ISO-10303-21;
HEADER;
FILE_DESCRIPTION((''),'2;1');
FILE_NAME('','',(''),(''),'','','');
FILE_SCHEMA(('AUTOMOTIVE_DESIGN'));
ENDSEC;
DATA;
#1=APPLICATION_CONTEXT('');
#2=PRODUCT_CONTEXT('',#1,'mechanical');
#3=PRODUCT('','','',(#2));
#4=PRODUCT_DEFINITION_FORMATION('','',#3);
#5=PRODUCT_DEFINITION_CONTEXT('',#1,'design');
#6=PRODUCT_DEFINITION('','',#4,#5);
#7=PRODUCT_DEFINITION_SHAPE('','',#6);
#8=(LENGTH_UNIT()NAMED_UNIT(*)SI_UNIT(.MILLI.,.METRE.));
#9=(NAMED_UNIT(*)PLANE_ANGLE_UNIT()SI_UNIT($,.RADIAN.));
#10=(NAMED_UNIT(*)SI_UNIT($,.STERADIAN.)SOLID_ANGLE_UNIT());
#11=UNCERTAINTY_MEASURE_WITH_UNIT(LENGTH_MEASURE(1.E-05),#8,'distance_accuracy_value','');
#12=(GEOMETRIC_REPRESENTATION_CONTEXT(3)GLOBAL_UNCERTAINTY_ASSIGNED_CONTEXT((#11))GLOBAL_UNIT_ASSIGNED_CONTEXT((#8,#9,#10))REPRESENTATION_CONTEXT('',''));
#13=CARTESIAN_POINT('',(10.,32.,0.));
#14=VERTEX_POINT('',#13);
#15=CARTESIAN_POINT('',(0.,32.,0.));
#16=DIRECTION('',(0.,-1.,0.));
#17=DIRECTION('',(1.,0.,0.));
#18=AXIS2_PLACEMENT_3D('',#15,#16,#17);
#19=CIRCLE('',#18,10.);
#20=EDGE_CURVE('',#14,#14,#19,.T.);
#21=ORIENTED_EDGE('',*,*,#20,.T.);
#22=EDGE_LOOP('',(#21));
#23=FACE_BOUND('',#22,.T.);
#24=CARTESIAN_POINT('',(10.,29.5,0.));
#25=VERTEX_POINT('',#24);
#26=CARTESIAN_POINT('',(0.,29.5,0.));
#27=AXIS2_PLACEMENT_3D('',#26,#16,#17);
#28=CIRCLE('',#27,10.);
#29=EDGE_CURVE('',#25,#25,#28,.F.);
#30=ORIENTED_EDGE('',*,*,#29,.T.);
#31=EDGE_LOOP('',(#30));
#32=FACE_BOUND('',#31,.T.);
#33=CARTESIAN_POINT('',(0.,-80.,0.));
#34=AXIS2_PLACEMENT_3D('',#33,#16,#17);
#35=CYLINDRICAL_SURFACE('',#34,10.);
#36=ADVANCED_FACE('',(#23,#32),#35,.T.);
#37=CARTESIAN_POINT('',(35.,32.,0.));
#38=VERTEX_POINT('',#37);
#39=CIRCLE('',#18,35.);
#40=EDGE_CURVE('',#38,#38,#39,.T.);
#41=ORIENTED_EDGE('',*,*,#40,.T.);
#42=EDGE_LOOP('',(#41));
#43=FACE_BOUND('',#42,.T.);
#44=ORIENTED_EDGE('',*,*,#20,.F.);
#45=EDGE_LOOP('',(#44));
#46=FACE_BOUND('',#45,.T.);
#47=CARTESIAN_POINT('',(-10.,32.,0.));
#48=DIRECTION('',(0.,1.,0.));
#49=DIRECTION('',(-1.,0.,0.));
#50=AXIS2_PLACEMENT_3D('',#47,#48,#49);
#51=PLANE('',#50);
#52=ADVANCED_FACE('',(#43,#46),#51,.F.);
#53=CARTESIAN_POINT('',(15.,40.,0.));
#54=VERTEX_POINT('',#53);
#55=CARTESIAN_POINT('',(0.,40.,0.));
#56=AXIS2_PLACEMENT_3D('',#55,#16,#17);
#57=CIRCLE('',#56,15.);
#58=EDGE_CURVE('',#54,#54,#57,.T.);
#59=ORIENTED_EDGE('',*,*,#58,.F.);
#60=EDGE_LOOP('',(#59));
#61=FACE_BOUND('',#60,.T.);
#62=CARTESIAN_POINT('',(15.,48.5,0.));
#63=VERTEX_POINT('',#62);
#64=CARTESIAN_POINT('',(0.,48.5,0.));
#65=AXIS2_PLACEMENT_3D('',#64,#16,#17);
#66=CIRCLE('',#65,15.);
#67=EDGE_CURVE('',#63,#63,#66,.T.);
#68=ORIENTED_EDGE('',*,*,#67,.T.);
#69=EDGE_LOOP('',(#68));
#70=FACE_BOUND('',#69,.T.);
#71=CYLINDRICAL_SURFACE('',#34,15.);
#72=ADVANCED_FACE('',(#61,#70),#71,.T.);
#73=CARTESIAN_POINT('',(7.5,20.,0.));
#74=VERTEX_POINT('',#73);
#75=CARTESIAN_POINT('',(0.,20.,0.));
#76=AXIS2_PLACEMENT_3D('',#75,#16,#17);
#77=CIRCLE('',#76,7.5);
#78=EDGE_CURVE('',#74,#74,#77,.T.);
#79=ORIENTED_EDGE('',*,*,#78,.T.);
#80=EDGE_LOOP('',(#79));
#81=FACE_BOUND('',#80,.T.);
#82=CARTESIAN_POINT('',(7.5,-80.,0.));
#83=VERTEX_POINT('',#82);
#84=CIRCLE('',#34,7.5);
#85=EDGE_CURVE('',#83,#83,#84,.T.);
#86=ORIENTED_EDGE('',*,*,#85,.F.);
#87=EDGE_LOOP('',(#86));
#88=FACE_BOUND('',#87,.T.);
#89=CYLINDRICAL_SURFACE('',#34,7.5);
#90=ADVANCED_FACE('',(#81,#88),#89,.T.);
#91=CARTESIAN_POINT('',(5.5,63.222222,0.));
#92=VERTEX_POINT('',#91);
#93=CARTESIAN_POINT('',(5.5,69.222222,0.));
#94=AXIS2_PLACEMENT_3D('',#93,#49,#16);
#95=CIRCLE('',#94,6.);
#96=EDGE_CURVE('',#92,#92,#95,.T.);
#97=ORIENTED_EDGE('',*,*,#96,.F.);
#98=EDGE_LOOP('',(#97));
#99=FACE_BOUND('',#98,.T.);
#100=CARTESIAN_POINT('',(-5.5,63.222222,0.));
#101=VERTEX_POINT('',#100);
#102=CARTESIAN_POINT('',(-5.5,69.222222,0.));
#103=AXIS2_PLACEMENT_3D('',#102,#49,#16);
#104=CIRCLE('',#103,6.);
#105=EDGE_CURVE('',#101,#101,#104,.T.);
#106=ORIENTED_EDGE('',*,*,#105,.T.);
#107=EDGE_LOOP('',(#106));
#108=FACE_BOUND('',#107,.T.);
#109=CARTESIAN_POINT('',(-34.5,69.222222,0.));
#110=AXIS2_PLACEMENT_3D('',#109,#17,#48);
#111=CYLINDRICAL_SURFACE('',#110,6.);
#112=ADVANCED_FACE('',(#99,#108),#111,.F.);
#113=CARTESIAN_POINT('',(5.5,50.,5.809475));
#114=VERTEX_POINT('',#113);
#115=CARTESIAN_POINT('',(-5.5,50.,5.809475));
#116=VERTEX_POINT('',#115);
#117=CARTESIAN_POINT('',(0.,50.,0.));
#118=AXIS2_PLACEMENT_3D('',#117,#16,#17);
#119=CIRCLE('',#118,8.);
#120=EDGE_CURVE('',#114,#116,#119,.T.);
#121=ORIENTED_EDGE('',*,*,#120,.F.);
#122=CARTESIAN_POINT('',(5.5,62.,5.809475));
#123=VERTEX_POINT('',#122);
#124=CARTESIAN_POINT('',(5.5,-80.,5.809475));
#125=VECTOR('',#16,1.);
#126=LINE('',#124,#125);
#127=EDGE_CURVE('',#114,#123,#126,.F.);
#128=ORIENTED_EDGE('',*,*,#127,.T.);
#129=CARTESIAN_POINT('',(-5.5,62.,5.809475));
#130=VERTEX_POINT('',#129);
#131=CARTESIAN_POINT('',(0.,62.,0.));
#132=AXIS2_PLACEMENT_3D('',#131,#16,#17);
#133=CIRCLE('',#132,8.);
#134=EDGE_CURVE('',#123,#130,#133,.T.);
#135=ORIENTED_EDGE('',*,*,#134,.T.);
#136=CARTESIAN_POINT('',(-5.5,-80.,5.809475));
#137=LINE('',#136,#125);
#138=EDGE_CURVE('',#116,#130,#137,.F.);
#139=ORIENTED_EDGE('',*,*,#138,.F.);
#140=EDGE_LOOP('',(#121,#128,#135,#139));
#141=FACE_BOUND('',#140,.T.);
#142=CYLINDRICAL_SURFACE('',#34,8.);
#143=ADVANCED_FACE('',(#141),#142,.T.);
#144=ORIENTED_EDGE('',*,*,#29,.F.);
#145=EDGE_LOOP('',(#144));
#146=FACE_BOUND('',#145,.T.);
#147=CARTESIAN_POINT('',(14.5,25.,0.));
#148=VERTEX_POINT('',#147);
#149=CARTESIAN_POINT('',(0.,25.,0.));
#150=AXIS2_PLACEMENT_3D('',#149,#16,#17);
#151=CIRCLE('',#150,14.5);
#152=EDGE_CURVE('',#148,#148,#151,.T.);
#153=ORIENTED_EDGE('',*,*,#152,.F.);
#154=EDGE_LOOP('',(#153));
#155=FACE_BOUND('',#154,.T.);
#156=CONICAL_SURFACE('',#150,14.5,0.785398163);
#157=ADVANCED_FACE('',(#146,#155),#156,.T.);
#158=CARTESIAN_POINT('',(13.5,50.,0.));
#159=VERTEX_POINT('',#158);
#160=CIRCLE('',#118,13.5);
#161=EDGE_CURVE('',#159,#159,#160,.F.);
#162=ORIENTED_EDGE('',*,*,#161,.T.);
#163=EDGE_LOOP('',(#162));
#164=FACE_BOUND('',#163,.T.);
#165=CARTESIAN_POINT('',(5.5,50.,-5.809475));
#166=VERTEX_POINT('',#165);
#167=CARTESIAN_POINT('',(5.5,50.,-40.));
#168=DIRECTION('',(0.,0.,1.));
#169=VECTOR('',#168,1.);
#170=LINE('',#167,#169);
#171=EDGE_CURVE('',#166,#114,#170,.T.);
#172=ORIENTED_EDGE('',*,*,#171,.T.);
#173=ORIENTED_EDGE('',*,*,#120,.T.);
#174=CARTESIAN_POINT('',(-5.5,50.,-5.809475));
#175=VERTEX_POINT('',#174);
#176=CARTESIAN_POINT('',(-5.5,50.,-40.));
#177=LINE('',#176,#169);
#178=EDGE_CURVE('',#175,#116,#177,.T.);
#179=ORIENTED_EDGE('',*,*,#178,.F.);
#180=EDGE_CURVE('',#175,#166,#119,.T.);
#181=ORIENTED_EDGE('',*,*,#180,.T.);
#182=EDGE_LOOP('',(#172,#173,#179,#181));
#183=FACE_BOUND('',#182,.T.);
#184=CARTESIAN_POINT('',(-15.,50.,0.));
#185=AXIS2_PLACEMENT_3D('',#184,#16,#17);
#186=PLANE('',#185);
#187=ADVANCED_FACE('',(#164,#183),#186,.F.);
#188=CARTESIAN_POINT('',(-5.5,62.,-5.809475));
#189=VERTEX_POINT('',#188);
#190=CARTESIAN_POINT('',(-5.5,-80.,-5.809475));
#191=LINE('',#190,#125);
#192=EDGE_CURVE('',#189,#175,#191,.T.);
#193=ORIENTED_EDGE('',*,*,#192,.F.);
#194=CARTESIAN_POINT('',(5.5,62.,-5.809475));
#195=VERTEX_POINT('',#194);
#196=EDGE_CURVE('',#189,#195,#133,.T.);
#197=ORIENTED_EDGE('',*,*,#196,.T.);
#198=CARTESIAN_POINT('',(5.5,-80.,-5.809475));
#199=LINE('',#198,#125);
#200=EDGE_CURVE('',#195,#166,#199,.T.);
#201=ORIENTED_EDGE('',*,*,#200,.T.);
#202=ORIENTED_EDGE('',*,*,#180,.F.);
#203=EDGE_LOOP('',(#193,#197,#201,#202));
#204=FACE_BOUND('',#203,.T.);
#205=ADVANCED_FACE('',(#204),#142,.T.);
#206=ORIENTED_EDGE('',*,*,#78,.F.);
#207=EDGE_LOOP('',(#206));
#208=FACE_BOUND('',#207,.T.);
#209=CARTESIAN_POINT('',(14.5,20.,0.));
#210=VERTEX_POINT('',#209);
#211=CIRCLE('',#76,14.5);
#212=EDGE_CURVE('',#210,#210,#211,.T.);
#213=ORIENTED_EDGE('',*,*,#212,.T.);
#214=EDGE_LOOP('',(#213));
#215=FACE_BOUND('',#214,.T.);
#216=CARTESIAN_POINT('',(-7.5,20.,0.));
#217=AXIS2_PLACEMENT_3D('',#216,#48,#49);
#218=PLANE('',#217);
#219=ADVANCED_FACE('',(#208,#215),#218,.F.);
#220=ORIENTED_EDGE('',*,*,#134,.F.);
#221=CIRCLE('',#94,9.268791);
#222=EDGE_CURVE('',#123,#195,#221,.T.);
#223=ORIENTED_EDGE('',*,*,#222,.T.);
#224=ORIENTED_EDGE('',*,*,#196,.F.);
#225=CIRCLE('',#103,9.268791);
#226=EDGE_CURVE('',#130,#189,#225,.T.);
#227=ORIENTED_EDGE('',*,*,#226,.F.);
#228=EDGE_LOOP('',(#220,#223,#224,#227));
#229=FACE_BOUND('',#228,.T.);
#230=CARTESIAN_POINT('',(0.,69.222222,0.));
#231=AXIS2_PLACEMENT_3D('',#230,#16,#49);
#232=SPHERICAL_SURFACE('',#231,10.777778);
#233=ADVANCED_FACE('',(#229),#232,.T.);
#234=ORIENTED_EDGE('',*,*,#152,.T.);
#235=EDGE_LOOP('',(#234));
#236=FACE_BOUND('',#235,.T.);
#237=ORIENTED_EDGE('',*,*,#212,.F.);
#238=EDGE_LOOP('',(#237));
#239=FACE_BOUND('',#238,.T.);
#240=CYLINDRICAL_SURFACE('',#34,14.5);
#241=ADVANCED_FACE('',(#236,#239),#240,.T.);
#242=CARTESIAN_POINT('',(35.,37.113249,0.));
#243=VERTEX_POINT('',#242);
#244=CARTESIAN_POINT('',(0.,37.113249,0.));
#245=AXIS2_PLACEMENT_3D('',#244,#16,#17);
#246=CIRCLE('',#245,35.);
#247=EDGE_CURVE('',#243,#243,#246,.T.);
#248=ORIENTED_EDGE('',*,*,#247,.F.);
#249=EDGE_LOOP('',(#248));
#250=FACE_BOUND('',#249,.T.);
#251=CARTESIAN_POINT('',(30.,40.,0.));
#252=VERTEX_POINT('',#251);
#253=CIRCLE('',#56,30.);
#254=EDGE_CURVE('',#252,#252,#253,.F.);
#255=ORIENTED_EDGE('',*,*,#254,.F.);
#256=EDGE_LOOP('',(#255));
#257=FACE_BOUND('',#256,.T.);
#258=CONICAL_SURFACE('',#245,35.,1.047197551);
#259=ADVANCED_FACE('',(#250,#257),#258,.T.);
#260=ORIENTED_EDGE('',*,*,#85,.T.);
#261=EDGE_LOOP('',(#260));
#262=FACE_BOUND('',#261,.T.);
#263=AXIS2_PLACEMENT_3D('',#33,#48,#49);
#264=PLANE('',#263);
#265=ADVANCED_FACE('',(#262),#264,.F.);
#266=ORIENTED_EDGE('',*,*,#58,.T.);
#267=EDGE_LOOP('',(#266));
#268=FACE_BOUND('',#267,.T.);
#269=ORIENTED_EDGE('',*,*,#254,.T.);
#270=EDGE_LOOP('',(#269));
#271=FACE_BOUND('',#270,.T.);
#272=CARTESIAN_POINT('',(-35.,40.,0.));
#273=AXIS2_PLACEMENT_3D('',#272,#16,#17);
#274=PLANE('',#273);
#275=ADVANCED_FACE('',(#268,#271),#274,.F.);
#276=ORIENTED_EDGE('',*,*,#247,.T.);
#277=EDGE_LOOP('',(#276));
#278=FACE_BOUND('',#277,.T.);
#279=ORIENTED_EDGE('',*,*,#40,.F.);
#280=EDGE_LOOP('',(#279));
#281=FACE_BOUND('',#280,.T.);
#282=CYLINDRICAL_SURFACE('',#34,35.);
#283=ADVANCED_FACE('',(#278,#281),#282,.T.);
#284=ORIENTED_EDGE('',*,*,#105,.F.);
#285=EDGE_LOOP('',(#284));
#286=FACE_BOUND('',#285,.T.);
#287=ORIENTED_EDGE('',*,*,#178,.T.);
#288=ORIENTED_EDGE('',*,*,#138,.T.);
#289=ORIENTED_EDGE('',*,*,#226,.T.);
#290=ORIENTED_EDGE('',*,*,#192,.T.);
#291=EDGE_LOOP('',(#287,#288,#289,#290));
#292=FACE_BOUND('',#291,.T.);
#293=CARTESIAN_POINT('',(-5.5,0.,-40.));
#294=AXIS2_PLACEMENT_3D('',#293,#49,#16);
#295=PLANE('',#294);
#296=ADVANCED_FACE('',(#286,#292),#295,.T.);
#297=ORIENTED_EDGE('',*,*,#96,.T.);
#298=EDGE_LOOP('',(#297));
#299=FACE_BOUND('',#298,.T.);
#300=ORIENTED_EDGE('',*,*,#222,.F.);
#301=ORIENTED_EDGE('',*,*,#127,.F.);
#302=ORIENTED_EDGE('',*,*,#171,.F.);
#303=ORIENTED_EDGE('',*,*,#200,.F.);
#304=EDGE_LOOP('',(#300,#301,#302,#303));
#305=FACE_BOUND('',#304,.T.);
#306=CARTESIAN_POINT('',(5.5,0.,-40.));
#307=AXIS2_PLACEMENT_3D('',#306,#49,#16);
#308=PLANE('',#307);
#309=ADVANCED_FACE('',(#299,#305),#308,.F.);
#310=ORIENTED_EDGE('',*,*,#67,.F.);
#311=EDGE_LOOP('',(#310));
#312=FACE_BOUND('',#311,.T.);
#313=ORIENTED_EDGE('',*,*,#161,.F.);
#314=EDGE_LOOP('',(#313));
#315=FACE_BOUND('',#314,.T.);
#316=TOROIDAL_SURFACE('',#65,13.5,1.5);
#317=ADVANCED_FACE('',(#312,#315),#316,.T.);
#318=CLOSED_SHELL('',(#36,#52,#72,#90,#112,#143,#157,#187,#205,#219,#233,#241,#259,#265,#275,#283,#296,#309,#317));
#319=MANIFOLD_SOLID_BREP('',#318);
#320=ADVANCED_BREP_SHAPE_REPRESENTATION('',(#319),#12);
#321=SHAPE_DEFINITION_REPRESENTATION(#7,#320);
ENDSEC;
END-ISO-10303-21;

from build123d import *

# Parameters (mm, degrees)
CHAFL_N1_SIZE         = 5
CHAFL_N2_SIZE         = 5
CHAFL_N2_SIZE2        = 2.886751346
REDONDEO1_R           = 1.5
CORTAR_EXTRUIR1_DEPTH = 40
CROQUIS3_R            = 6
CORTAR_EXTRUIR2_DEPTH = 40


with BuildPart() as part:
    # Croquis1 → Revolución1 (revolve)
    with BuildSketch(Plane.XY, mode=Mode.PRIVATE) as revoluci_n1_sk:
        with BuildLine():
            Line((0, -80), (0, 80))
            ThreePointArc((0, 80), (-9.848857802, 73.599492356), (-8, 62))
            Line((-8, 62), (-8, 50))
            Line((-8, 50), (-15, 50))
            Line((-15, 50), (-15, 40))
            Line((-15, 40), (-35, 40))
            Line((-35, 40), (-35, 32))
            Line((-35, 32), (-10, 32))
            Line((-10, 32), (-10, 30))
            Line((-10, 30), (-14.5, 30))
            Line((-14.5, 30), (-14.5, 20))
            Line((-14.5, 20), (-7.5, 20))
            Line((-7.5, 20), (-7.5, -80))
            Line((-7.5, -80), (0, -80))
        make_face()
    revolve(revoluci_n1_sk.sketch.rotate(Axis((0, -80, 0), (0, 1, 0)), 180), axis=Axis((0, -80, 0), (0, 1, 0)))

    # Chaflán1
    # the kernel refuses this chamfer: 5 mm, written as the material it takes off along each edge
    with BuildSketch(Plane(origin=(0, 30, 0), x_dir=(1, 0, 0), z_dir=(0, 0, 1))) as chafl_n1_piece_1_section:
        Polygon((14.5 - CHAFL_N1_SIZE, 0), (14.5, -CHAFL_N1_SIZE), (14.5, 0), align=None)
    chafl_n1_piece_1 = revolve(axis=Axis((0, 30, 0), (0, 1, 0)), mode=Mode.PRIVATE)
    chafl_n1_piece_1 = chafl_n1_piece_1 - Plane(origin=(0, 27.252174823, 0), x_dir=(1, 0, 0), z_dir=(0, -1, 0)) * Cylinder(10, 58, mode=Mode.PRIVATE)
    add(chafl_n1_piece_1, mode=Mode.SUBTRACT)

    # Chaflán2
    chafl_n2_edges = [part.edges().sort_by_distance(p)[0] for p in [
        (-35, 40, 0),
    ]]
    chafl_n2_side = [part.faces().sort_by_distance(p)[0] for p in [
        (-15.989949494, 40, 0),
    ]]
    chamfer(chafl_n2_edges, length=CHAFL_N2_SIZE, length2=CHAFL_N2_SIZE2, reference=chafl_n2_side[0])

    # Redondeo1
    redondeo1_edges = [part.edges().sort_by_distance(p)[0] for p in [
        (-15, 50, 0),
    ]]
    fillet(redondeo1_edges, radius=REDONDEO1_R)

    # Croquis2 → Cortar-Extruir1 (cut, symmetric)
    with BuildSketch(Plane.XY):
        Polygon((-13.5, 50), (-5.5, 50), (-5.5, 83.023482793), (-17.692901936, 83.023482793), (-17.692901936, 50), align=None)
    cortar_extruir1 = extrude(amount=CORTAR_EXTRUIR1_DEPTH, both=True, mode=Mode.SUBTRACT)

    # Simetría1: Cortar-Extruir1 across plane
    add(cortar_extruir1.mirror(Plane(origin=(0, 0, 0), x_dir=(0, 0, 1), z_dir=(1, 0, 0))), mode=Mode.SUBTRACT)

    # Croquis3 → Cortar-Extruir2 (cut, symmetric)
    with BuildSketch(Plane(origin=(5.5, 0, 0), x_dir=(0, 0, -1), z_dir=(1, 0, 0))):
        with Locations(Location((0, 69.222222222, 0), (0, 0, 270))):
            Circle(CROQUIS3_R)
    extrude(amount=CORTAR_EXTRUIR2_DEPTH, both=True, mode=Mode.SUBTRACT)


solid = part.part
